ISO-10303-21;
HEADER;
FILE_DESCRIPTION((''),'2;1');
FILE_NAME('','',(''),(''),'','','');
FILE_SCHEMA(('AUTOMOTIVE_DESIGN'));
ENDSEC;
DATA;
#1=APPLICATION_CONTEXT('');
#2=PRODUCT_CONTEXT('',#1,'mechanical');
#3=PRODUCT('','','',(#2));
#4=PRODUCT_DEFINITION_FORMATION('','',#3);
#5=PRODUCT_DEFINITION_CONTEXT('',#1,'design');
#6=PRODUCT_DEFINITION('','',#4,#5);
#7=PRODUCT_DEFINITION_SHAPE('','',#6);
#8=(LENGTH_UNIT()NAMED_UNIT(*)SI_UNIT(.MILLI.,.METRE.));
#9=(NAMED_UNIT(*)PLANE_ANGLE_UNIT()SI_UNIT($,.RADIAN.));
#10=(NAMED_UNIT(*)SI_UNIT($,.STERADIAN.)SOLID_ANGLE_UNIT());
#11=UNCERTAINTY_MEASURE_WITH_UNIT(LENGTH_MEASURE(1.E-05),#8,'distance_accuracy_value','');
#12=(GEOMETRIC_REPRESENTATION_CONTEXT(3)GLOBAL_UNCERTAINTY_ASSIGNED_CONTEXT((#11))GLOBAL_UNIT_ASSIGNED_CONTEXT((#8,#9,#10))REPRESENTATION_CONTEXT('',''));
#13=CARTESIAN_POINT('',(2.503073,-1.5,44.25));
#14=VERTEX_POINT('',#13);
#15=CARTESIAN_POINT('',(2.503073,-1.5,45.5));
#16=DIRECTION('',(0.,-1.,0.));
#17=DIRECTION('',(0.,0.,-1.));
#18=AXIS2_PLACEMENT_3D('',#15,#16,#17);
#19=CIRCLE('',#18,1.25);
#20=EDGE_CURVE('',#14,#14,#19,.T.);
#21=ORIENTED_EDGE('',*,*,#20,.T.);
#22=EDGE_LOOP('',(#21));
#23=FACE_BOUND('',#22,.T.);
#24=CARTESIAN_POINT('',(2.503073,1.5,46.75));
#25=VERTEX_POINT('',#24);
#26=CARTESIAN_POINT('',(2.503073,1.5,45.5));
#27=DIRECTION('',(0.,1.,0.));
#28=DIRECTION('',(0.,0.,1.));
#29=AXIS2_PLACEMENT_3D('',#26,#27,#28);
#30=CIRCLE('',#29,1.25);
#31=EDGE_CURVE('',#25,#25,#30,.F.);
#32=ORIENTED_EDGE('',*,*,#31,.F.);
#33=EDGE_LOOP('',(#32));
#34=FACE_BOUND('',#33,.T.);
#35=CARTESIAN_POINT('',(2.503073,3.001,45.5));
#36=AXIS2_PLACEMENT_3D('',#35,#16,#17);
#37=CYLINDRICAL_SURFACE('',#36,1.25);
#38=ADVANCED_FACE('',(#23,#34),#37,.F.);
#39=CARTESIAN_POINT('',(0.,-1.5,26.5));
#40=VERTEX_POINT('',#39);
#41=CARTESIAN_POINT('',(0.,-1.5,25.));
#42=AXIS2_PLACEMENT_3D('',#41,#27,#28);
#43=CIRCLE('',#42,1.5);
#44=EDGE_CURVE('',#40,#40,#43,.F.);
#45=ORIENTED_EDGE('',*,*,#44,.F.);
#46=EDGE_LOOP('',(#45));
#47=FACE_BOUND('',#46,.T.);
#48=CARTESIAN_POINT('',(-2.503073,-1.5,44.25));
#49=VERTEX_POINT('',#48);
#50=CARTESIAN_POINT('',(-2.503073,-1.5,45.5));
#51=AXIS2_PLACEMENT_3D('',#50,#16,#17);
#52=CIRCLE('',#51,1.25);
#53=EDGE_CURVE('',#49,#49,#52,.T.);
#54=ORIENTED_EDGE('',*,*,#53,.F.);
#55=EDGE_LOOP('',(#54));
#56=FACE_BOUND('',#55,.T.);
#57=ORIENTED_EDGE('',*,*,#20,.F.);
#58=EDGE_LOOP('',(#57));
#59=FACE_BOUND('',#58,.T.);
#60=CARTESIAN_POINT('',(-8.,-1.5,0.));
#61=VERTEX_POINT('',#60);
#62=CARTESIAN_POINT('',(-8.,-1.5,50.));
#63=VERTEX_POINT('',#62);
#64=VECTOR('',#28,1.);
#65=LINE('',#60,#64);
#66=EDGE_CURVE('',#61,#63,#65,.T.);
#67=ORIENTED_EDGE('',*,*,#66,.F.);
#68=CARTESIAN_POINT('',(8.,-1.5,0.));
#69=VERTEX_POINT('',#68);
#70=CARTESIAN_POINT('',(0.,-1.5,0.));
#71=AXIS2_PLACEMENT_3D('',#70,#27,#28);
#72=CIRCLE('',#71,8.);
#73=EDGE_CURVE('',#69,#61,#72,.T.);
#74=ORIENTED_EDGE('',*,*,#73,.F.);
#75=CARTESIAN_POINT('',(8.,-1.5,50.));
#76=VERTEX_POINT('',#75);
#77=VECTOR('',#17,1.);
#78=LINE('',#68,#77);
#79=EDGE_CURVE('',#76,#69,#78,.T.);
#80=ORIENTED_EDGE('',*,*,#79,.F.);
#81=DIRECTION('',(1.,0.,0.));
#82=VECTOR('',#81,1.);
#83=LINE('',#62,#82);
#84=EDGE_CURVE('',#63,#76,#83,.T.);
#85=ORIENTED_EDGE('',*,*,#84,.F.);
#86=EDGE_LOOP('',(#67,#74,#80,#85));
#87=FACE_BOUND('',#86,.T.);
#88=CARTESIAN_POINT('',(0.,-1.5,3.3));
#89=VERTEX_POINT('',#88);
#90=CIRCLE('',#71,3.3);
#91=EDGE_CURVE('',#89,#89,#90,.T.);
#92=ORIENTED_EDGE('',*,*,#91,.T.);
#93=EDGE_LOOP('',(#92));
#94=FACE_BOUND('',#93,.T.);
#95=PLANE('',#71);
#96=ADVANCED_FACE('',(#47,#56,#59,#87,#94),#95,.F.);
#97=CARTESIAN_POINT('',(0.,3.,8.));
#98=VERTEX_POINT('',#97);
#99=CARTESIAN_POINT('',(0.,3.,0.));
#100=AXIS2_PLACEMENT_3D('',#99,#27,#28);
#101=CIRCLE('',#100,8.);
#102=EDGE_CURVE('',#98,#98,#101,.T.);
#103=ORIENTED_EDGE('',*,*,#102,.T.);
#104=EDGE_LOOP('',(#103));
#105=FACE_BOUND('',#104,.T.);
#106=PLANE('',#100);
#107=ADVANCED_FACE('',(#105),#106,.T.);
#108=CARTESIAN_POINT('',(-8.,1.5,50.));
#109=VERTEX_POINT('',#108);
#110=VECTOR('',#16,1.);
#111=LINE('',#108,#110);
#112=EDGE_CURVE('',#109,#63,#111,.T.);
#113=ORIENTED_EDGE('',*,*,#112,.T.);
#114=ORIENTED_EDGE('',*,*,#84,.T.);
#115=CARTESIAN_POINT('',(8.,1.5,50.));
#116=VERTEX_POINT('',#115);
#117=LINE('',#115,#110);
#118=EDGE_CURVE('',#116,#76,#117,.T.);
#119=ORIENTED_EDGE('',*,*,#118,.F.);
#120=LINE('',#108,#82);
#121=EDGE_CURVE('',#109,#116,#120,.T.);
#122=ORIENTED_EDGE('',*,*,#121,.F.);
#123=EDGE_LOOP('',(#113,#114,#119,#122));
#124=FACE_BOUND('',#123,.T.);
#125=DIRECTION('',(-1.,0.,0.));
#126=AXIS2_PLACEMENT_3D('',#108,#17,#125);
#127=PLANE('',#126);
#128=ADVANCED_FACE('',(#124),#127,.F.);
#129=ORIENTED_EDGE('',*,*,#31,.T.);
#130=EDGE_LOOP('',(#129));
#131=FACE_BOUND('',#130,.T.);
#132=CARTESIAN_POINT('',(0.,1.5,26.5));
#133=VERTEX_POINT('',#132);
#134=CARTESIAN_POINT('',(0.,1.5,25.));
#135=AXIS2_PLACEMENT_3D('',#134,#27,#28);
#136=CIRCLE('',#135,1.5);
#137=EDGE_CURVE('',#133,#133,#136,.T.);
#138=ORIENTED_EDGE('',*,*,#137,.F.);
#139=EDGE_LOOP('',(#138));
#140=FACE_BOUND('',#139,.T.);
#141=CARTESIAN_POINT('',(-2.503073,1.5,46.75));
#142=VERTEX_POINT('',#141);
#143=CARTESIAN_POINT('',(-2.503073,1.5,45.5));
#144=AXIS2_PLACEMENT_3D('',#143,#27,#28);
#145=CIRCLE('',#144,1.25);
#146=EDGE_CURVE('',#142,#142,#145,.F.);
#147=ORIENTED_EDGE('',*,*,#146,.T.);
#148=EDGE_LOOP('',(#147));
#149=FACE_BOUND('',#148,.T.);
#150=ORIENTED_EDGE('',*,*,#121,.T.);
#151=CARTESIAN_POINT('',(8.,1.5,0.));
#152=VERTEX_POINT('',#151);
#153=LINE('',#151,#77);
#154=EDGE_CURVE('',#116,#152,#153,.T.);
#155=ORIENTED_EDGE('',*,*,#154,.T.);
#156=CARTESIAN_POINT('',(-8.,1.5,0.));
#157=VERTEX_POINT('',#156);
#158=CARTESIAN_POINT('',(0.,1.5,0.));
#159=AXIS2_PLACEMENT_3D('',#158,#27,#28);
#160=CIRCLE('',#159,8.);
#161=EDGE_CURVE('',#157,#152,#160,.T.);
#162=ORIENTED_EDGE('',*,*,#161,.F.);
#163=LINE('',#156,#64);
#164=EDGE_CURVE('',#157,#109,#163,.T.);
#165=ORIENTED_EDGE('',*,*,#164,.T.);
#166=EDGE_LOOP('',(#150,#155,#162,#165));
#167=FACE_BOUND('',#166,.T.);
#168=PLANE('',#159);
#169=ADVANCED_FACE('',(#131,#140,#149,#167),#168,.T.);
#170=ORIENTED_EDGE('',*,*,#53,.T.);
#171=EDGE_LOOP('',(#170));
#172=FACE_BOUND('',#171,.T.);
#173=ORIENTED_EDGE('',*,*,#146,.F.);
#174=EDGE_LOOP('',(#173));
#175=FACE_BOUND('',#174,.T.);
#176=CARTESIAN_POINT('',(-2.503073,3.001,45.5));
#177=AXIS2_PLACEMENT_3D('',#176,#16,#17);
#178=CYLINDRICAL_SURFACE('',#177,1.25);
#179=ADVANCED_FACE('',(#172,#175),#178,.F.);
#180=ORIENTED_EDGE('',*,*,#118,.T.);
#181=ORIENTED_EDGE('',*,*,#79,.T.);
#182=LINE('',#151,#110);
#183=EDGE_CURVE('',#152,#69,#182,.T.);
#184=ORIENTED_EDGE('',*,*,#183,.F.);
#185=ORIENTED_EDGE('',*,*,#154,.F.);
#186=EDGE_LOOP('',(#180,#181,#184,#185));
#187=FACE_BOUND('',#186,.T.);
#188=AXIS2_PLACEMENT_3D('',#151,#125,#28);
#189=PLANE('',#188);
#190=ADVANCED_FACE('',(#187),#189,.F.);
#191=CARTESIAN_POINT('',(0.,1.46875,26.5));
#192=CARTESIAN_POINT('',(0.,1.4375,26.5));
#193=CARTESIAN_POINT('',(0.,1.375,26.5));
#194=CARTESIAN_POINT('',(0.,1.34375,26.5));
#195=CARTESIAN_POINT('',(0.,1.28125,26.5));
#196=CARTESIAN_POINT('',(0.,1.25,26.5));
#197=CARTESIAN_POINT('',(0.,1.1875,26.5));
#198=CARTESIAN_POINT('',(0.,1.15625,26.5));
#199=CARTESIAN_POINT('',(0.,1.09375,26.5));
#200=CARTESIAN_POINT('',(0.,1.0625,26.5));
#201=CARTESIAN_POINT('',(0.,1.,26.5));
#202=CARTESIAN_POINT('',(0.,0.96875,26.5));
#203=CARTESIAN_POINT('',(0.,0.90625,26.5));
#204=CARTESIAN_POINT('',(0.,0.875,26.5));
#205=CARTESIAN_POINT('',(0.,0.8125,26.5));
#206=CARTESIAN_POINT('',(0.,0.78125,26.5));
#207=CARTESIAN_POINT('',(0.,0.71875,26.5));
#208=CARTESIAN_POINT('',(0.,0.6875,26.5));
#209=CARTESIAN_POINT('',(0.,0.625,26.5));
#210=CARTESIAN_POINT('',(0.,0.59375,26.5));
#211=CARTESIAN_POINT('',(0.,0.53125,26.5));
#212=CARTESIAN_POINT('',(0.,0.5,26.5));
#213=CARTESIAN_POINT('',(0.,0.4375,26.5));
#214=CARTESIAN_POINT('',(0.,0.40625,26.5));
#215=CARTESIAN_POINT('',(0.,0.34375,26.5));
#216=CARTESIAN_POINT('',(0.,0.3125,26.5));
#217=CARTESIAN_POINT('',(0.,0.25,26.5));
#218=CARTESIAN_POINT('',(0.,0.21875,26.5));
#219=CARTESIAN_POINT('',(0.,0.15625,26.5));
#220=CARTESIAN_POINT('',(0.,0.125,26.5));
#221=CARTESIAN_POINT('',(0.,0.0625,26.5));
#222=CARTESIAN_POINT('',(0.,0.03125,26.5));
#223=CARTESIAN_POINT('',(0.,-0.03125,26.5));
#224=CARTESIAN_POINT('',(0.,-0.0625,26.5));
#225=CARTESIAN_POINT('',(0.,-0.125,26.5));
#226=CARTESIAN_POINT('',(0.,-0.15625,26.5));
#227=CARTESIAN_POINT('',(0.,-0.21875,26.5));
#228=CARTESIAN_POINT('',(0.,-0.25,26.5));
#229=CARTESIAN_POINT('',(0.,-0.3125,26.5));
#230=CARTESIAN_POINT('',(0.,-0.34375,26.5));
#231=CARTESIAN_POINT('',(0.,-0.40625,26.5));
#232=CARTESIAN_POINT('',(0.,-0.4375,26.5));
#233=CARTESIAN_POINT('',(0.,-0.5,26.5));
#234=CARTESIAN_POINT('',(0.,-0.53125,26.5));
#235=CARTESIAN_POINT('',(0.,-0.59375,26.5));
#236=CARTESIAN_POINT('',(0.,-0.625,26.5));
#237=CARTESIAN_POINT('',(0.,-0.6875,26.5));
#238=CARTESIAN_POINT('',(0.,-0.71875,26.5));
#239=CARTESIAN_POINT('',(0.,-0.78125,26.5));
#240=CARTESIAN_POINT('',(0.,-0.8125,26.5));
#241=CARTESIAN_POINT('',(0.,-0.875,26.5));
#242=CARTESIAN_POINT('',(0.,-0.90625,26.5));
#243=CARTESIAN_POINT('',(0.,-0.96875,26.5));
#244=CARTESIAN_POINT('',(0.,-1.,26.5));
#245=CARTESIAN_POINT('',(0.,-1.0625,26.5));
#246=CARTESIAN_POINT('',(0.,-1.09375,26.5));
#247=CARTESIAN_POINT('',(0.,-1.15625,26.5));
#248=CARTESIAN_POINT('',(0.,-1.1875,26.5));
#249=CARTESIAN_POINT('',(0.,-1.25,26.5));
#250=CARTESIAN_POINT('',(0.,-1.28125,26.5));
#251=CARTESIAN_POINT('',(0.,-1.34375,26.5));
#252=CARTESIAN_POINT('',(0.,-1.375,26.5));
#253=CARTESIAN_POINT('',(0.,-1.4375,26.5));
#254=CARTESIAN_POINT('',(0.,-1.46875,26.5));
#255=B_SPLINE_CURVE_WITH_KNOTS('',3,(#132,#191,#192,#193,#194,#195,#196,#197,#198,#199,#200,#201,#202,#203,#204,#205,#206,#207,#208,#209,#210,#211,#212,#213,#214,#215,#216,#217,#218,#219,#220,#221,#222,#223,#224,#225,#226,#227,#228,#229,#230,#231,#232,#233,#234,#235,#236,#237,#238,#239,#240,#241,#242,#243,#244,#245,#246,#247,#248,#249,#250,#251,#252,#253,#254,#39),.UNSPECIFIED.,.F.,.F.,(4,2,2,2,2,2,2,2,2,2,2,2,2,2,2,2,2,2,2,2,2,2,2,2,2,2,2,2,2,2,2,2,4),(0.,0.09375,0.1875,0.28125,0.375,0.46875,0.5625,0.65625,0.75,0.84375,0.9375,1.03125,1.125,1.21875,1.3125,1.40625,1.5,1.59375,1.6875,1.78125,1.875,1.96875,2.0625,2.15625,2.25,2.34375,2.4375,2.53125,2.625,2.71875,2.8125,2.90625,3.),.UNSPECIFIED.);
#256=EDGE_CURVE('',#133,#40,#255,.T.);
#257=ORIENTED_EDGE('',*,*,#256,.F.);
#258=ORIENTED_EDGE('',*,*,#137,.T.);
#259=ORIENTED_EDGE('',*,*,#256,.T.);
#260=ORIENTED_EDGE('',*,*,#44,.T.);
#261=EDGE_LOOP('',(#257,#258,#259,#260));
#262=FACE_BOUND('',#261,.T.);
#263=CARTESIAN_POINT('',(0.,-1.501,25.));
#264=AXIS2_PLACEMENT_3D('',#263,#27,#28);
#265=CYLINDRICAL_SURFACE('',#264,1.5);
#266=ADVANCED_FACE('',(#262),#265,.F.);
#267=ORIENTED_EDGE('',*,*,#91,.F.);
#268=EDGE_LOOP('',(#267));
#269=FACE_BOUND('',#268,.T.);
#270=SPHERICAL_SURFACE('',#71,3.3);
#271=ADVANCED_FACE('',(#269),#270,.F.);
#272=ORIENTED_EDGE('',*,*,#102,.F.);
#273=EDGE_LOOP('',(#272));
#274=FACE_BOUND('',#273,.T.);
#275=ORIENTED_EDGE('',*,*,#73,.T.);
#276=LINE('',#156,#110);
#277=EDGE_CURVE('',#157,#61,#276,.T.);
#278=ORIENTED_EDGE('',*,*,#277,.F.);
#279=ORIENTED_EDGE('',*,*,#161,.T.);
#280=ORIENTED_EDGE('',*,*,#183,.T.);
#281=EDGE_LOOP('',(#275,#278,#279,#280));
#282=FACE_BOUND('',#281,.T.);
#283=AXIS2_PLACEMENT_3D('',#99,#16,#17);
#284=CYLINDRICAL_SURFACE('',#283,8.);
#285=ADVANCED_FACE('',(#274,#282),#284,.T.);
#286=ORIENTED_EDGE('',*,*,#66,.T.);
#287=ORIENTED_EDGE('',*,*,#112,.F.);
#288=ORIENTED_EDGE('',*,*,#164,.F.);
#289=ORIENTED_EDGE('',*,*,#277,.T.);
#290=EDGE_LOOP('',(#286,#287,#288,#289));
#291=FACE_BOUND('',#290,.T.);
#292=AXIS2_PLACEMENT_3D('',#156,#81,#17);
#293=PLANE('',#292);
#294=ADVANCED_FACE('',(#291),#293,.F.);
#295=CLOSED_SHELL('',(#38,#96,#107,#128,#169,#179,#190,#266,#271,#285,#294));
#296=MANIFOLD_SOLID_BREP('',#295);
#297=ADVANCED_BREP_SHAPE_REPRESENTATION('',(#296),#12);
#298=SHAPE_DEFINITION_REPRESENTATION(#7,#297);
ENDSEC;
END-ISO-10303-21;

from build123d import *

# Parameters (mm, degrees)
BOSS_EXTRUDE1_DEPTH      = 3
BOSS_EXTRUDE1_DEPTH_BACK = 1.5
SKETCH1_R                = 8
SKETCH2_W                = 16
SKETCH2_H                = 50
BOSS_EXTRUDE2_DEPTH      = 1.5
CUT_EXTRUDE1_REACH       = 52.836
SKETCH3_R                = 1.25
CUT_EXTRUDE3_REACH       = 52.725
SKETCH5_R                = 1.5


with BuildPart() as part:
    # Sketch1 → Boss-Extrude1 (new, two sides: drawn at the far end of the back side and taken through both)
    with BuildSketch(Plane(origin=(0, 0, 0), x_dir=(1, 0, 0), z_dir=(0, 1, 0)).offset(-BOSS_EXTRUDE1_DEPTH_BACK)):
        Circle(SKETCH1_R)
    extrude(amount=BOSS_EXTRUDE1_DEPTH + BOSS_EXTRUDE1_DEPTH_BACK)

    # Sketch2 → Boss-Extrude2 (add, symmetric)
    with BuildSketch(Plane(origin=(0, 0, 0), x_dir=(1, 0, 0), z_dir=(0, 1, 0))):
        with Locations((0, -25)):
            Rectangle(SKETCH2_W, SKETCH2_H)
    extrude(amount=BOSS_EXTRUDE2_DEPTH, both=True)

    # Sketch3 → Cut-Extrude1 (cut, up to next)
    with BuildSketch(Plane(origin=(0, -1.5, 0), x_dir=(-1, 0, 0), z_dir=(0, -1, 0)), mode=Mode.PRIVATE) as cut_extrude1_sk1:
        with Locations((2.503073418, -45.5)):
            Circle(SKETCH3_R)
    cut_extrude1_tool1 = extrude(cut_extrude1_sk1.sketch, amount=-CUT_EXTRUDE1_REACH, mode=Mode.PRIVATE) & part.part
    # Sketch3 → Cut-Extrude1 (cut, up to next)
    with BuildSketch(Plane(origin=(0, -1.5, 0), x_dir=(-1, 0, 0), z_dir=(0, -1, 0)), mode=Mode.PRIVATE) as cut_extrude1_sk2:
        with Locations((-2.503073418, -45.5)):
            Circle(SKETCH3_R)
    cut_extrude1_tool2 = extrude(cut_extrude1_sk2.sketch, amount=-CUT_EXTRUDE1_REACH, mode=Mode.PRIVATE) & part.part
    add(cut_extrude1_tool1.solids().sort_by_distance((-2.503073, -1.5, 45.5))[0], mode=Mode.SUBTRACT)
    add(cut_extrude1_tool2.solids().sort_by_distance((2.503073, -1.5, 45.5))[0], mode=Mode.SUBTRACT)

    # Sketch4 → Cut-Revolve21 (revolve, cut)
    with BuildSketch(Plane(origin=(0, -1.5, 0), x_dir=(-1, 0, 0), z_dir=(0, -1, 0))):
        with BuildLine():
            Line((3.3, 0), (-3.3, 0))
            ThreePointArc((-3.3, 0), (0, -3.3), (3.3, 0))
        make_face()
    revolve(axis=Axis((3.3, -1.5, 0), (-1, 0, 0)), mode=Mode.SUBTRACT)

    # Sketch5 → Cut-Extrude3 (cut, up to next)
    with BuildSketch(Plane(origin=(0, 1.5, 0), x_dir=(1, 0, 0), z_dir=(0, 1, 0)), mode=Mode.PRIVATE) as cut_extrude3_sk1:
        with Locations((0, -25)):
            Circle(SKETCH5_R)
    cut_extrude3_tool1 = extrude(cut_extrude3_sk1.sketch, amount=-CUT_EXTRUDE3_REACH, mode=Mode.PRIVATE) & part.part
    add(cut_extrude3_tool1.solids().sort_by_distance((0, 1.5, 25))[0], mode=Mode.SUBTRACT)


solid = part.part
